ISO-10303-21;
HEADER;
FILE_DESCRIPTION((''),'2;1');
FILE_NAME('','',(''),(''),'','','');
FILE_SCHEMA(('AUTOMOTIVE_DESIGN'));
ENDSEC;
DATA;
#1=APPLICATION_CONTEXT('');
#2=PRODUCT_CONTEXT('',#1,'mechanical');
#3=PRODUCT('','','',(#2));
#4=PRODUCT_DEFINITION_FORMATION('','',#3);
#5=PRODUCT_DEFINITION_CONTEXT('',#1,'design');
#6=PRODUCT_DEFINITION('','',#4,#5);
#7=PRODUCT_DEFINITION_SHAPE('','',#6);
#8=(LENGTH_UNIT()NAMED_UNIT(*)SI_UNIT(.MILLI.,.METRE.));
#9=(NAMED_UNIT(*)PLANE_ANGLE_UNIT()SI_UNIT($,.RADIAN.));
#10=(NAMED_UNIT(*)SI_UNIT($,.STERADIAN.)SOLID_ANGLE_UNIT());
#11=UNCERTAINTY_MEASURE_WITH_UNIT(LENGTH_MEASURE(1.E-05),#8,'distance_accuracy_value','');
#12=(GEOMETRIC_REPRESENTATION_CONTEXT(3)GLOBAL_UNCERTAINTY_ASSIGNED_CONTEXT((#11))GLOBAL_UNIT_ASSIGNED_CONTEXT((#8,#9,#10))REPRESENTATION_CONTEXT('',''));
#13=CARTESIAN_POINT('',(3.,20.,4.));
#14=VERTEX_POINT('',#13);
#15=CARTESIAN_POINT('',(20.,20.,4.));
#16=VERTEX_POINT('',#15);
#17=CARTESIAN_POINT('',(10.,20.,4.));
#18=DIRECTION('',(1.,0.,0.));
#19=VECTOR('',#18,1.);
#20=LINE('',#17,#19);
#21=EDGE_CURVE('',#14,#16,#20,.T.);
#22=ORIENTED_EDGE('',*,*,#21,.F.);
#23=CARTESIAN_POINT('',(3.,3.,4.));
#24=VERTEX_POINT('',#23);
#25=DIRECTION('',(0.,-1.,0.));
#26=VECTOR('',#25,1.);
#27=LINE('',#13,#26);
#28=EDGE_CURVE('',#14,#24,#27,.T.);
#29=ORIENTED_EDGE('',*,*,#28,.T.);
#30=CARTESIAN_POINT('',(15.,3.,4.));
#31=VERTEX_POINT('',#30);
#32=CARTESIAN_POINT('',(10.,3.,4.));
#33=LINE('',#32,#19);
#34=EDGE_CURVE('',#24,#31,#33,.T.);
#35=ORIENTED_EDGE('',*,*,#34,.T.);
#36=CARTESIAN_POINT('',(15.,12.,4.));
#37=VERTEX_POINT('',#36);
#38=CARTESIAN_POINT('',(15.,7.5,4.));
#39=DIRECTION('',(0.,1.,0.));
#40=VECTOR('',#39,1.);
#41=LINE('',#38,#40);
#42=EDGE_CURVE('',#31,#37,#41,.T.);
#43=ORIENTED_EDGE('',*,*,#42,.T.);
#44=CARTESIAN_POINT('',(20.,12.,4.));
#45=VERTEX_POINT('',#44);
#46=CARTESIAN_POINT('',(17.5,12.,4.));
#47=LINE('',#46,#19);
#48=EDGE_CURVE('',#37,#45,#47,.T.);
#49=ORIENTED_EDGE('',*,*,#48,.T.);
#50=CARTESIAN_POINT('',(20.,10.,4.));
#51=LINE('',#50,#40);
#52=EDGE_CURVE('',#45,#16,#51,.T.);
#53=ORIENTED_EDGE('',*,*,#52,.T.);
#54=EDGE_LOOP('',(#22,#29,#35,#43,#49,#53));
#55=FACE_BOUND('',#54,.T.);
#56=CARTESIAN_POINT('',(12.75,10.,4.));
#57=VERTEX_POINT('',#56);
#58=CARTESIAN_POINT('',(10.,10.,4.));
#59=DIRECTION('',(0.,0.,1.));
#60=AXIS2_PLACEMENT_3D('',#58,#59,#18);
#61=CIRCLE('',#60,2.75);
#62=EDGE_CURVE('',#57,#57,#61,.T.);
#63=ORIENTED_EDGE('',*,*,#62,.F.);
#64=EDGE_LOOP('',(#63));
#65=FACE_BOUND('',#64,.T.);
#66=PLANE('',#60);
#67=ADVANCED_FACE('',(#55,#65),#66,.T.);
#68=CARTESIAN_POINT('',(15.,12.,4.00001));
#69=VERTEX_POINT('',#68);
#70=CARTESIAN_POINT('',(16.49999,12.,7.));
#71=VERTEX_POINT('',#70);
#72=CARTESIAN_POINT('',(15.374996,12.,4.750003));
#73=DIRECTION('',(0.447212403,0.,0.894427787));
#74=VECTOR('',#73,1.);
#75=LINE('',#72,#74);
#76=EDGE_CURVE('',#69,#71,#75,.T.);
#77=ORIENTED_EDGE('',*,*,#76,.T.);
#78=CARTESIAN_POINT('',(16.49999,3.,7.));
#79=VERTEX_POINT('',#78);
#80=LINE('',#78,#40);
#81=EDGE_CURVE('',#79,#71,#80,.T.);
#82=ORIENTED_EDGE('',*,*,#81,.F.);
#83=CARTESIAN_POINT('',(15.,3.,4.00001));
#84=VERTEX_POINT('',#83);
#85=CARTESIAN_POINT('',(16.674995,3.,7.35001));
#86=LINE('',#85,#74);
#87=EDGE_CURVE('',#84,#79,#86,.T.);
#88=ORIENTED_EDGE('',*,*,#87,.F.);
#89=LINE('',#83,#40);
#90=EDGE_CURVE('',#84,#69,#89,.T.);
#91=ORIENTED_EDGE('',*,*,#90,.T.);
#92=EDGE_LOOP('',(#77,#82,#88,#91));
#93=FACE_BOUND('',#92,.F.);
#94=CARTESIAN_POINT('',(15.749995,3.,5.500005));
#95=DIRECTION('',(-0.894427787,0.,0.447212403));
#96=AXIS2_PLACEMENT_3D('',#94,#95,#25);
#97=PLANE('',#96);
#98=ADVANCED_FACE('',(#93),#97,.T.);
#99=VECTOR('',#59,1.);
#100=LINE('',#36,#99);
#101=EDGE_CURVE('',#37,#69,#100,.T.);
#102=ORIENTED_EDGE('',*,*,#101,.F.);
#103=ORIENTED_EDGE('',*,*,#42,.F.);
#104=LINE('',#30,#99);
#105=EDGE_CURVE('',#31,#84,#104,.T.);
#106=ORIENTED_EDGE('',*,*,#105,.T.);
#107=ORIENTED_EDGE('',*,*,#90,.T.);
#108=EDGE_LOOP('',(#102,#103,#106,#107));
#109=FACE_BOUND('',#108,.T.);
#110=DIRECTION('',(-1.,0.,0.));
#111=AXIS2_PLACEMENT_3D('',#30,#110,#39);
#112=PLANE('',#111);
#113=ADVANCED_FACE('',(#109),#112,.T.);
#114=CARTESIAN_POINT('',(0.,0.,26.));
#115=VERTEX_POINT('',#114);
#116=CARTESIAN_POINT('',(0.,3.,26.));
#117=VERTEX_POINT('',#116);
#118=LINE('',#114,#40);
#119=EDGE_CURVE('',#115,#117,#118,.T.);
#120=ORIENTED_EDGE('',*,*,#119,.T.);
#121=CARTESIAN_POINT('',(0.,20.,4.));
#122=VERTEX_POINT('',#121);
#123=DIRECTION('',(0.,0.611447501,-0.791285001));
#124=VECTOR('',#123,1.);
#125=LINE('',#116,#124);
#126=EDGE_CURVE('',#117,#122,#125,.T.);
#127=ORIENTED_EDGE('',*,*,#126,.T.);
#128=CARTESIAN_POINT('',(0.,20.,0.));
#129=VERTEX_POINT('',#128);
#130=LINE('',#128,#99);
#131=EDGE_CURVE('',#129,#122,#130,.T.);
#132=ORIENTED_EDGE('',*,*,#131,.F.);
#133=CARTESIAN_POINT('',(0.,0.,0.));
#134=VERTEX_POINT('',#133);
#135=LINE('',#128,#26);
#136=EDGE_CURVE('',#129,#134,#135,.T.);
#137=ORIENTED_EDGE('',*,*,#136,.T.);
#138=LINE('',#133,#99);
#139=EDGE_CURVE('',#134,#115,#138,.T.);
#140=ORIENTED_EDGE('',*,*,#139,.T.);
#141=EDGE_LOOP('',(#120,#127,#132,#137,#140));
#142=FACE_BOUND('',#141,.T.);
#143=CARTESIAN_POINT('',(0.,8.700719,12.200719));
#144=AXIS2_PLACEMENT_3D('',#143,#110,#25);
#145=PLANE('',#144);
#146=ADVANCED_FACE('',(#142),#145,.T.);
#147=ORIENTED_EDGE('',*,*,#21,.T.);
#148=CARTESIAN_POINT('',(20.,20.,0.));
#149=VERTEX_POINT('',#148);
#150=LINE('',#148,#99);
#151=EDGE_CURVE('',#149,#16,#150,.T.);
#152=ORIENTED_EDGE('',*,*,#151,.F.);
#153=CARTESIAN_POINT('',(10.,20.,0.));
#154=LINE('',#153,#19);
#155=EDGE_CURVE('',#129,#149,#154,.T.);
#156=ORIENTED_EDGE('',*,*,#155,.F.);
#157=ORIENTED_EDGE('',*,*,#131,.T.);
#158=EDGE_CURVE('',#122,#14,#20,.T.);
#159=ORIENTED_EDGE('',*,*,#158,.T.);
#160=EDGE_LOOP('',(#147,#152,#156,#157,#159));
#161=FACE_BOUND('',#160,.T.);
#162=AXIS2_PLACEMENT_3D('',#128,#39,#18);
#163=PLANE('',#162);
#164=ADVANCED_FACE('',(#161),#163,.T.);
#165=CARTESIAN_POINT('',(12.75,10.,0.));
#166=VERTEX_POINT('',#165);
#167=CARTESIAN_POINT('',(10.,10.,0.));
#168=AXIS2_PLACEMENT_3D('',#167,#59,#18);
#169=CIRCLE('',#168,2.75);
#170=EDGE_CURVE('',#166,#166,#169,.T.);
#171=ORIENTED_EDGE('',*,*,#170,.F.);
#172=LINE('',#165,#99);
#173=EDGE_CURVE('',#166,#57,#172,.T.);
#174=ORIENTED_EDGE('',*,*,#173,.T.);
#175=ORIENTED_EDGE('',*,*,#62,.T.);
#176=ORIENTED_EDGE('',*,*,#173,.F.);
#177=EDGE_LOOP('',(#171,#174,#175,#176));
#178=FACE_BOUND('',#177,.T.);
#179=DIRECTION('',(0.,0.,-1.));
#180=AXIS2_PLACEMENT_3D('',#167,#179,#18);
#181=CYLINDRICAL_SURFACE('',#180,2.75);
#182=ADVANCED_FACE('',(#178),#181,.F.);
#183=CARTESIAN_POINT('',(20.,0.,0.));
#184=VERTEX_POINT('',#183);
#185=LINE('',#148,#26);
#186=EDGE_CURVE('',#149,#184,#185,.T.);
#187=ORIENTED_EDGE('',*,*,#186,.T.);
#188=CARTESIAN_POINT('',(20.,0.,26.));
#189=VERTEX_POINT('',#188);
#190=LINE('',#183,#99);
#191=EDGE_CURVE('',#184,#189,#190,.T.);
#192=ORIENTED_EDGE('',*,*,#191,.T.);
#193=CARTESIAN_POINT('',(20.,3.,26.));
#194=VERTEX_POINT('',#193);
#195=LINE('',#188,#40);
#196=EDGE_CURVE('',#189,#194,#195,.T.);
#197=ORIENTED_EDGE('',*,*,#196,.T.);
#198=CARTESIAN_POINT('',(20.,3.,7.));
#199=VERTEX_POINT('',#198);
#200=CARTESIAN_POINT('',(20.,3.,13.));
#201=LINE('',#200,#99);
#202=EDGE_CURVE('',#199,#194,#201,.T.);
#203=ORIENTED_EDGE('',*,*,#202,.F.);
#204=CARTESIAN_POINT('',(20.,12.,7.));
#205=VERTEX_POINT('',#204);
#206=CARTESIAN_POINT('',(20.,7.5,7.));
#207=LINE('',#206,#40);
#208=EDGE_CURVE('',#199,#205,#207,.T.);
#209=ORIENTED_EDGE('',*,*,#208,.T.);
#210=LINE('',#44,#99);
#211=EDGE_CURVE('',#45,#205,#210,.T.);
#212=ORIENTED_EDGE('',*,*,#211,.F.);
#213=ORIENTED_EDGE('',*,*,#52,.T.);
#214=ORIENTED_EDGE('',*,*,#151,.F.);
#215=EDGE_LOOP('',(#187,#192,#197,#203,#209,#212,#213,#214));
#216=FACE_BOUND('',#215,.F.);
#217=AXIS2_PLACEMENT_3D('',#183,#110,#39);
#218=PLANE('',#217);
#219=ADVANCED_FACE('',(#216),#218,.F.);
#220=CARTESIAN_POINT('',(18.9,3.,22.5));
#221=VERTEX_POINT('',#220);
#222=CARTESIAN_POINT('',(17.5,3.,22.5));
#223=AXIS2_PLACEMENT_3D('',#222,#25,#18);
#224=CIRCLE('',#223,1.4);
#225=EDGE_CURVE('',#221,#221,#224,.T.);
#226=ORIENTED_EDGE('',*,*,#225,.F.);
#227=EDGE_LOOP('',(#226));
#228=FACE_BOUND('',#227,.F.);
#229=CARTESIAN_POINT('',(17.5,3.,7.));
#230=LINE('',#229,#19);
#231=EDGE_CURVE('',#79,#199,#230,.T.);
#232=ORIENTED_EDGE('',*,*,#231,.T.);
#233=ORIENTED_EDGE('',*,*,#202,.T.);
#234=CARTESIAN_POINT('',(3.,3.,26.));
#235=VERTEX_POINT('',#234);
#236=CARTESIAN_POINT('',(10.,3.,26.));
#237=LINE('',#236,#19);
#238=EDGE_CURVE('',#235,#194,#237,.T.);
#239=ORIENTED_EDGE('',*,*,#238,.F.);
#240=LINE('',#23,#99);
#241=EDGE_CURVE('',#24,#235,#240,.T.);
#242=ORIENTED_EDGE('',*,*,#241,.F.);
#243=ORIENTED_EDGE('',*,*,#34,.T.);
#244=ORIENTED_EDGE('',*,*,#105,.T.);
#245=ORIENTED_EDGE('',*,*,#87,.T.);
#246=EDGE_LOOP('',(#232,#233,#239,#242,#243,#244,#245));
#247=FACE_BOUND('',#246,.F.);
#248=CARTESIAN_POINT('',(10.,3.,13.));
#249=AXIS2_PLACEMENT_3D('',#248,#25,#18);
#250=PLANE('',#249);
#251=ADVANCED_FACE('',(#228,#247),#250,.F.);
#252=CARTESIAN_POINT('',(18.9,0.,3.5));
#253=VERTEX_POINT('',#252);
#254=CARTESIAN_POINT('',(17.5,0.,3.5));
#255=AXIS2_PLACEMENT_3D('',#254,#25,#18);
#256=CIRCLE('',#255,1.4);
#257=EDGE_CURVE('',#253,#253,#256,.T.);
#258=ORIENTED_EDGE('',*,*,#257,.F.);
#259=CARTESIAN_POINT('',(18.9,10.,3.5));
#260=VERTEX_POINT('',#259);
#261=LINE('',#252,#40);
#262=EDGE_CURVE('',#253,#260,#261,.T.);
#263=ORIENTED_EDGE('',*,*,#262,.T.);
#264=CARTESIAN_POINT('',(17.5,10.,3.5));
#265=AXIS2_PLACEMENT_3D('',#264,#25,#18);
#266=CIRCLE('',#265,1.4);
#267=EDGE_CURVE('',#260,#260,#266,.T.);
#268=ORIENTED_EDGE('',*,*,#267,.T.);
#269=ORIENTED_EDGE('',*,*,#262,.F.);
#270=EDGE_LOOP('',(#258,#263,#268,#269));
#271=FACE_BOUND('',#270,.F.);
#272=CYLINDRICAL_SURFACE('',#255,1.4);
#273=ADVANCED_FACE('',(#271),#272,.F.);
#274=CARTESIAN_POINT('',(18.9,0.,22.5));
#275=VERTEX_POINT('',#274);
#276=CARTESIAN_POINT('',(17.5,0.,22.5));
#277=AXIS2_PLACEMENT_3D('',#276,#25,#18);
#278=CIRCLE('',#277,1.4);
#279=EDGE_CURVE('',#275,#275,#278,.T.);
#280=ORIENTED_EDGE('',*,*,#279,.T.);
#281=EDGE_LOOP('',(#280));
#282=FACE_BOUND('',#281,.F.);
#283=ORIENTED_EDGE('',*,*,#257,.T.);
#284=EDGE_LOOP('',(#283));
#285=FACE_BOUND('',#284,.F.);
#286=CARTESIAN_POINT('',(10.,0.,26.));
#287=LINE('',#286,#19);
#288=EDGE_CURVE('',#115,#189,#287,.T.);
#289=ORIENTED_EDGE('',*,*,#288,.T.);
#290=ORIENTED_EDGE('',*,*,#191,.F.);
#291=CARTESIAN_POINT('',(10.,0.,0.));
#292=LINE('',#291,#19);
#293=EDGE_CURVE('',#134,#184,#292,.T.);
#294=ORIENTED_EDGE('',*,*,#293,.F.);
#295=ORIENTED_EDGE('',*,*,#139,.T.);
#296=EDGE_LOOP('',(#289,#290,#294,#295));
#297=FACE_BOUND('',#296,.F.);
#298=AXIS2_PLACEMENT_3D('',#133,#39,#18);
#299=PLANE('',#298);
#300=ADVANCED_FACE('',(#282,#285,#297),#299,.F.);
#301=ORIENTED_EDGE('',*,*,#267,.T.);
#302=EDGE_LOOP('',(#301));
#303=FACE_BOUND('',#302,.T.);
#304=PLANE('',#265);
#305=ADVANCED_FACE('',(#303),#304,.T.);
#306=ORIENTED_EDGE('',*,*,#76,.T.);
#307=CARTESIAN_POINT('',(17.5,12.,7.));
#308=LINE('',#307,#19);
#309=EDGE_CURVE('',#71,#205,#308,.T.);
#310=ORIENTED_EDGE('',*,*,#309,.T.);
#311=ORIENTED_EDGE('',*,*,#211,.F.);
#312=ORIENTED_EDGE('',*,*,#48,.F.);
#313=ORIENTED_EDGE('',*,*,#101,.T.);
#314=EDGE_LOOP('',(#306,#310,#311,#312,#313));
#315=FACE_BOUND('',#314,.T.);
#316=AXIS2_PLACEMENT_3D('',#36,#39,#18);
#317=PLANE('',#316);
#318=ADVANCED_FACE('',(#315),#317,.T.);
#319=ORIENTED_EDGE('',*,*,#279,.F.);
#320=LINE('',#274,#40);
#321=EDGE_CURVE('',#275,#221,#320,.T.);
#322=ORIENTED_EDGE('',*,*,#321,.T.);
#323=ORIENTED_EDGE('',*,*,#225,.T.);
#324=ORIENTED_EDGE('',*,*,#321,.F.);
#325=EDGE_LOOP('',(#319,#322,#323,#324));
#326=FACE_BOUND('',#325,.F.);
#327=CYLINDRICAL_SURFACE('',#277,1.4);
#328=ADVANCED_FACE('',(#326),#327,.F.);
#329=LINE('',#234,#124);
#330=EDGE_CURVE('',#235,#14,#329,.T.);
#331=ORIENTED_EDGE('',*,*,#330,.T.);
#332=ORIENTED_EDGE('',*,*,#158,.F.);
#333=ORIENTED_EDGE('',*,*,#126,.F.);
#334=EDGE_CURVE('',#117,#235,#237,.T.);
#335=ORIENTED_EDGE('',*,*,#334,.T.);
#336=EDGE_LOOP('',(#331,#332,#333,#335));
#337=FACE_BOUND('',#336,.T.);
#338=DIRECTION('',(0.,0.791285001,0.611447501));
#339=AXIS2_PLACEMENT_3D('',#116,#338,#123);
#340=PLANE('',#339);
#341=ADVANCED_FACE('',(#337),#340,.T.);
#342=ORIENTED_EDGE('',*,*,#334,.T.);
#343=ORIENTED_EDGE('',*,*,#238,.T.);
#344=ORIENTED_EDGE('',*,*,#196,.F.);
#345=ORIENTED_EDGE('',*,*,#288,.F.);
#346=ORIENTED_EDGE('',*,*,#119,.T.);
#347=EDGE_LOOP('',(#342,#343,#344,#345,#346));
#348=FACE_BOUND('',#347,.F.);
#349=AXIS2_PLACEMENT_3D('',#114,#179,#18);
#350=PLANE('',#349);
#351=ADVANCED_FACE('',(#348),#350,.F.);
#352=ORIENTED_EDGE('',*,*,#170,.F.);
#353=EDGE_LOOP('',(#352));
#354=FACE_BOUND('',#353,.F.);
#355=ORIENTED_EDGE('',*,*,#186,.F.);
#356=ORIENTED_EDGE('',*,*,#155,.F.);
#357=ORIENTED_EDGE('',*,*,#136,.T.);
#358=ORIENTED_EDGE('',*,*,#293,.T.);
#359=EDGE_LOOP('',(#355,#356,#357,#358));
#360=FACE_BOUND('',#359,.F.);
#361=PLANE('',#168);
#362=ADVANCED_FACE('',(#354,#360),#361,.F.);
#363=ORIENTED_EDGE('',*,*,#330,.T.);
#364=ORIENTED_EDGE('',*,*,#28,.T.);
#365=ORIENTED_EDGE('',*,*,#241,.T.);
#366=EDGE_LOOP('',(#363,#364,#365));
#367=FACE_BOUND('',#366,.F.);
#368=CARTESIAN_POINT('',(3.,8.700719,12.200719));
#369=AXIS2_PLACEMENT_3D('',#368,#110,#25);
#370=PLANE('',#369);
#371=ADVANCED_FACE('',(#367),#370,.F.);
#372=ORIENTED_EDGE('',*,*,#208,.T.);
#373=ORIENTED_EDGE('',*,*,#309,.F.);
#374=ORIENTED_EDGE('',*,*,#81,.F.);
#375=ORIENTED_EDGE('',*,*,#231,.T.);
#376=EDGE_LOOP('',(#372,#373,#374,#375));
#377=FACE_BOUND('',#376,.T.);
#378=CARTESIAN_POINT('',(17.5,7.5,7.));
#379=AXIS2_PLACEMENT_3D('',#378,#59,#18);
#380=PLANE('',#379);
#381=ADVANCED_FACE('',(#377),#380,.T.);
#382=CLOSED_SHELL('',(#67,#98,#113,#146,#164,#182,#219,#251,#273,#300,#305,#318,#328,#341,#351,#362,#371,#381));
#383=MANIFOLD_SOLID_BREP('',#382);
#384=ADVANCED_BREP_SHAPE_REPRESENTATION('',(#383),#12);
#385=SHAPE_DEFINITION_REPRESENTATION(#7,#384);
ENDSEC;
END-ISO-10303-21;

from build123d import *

# Parameters (mm, degrees)
F0_W      = 20
F0_H      = 20
F0_R      = 2.75
F1_DEPTH  = 4
F2_W      = 20
F2_H      = 26
F3_DEPTH  = 3
F5_W      = 5
F5_H      = 9
F6_DEPTH  = 3
F4_R      = 1.4
F7_DEPTH  = 10
F9_DEPTH  = 3
F10_SIZE2 = 1.49999
F10_SIZE  = 2.99999


# Not quite as in the source:
# - a fillet or chamfer is up to 0.001 mm smaller than in the source, because OpenCascade refuses the exact size


with BuildPart() as f1:
    # F0 (on Top) → F1 (new body)
    with BuildSketch(Plane.XY):
        with Locations((10, 10)):
            Rectangle(F0_W, F0_H)
        with Locations((10, 10)):
            Circle(F0_R, mode=Mode.SUBTRACT)
    extrude(amount=F1_DEPTH)

    # F2 (on face) → F3 (join)
    with BuildSketch(Plane.XZ):
        with Locations((10, 13)):
            Rectangle(F2_W, F2_H)
    extrude(amount=-F3_DEPTH)

    # F5 (on face) → F6 (join)
    with BuildSketch(Plane.XY.offset(4)):
        with Locations((17.5, 7.5)):
            Rectangle(F5_W, F5_H)
    extrude(amount=F6_DEPTH)

    # F4 (on face) → F7 (cut)
    with BuildSketch(Plane.XZ):
        with Locations((17.5, 3.5)):
            Circle(F4_R)
        with Locations((17.5, 22.5)):
            Circle(F4_R)
    extrude(amount=-F7_DEPTH, mode=Mode.SUBTRACT)

    # F8 (on face) → F9 (join)
    with BuildSketch(Plane(origin=(0, 0, 0), x_dir=(0, -1, 0), z_dir=(-1, 0, 0))):
        Polygon((-3, 4), (-3, 26), (-20, 4), align=None)
    extrude(amount=-F9_DEPTH)

    # F10 (size 3 and 1.5 in the source; OpenCascade refuses exactly that, so slightly less here)
    f10_edges = [f1.edges().sort_by_distance(p)[0] for p in [
        (15, 7.5, 7),
    ]]
    f10_side = f1.faces().sort_by_distance((15, 7.5, 5.5))[0]
    chamfer(f10_edges, length=F10_SIZE, length2=F10_SIZE2, reference=f10_side)


solid = f1.part
